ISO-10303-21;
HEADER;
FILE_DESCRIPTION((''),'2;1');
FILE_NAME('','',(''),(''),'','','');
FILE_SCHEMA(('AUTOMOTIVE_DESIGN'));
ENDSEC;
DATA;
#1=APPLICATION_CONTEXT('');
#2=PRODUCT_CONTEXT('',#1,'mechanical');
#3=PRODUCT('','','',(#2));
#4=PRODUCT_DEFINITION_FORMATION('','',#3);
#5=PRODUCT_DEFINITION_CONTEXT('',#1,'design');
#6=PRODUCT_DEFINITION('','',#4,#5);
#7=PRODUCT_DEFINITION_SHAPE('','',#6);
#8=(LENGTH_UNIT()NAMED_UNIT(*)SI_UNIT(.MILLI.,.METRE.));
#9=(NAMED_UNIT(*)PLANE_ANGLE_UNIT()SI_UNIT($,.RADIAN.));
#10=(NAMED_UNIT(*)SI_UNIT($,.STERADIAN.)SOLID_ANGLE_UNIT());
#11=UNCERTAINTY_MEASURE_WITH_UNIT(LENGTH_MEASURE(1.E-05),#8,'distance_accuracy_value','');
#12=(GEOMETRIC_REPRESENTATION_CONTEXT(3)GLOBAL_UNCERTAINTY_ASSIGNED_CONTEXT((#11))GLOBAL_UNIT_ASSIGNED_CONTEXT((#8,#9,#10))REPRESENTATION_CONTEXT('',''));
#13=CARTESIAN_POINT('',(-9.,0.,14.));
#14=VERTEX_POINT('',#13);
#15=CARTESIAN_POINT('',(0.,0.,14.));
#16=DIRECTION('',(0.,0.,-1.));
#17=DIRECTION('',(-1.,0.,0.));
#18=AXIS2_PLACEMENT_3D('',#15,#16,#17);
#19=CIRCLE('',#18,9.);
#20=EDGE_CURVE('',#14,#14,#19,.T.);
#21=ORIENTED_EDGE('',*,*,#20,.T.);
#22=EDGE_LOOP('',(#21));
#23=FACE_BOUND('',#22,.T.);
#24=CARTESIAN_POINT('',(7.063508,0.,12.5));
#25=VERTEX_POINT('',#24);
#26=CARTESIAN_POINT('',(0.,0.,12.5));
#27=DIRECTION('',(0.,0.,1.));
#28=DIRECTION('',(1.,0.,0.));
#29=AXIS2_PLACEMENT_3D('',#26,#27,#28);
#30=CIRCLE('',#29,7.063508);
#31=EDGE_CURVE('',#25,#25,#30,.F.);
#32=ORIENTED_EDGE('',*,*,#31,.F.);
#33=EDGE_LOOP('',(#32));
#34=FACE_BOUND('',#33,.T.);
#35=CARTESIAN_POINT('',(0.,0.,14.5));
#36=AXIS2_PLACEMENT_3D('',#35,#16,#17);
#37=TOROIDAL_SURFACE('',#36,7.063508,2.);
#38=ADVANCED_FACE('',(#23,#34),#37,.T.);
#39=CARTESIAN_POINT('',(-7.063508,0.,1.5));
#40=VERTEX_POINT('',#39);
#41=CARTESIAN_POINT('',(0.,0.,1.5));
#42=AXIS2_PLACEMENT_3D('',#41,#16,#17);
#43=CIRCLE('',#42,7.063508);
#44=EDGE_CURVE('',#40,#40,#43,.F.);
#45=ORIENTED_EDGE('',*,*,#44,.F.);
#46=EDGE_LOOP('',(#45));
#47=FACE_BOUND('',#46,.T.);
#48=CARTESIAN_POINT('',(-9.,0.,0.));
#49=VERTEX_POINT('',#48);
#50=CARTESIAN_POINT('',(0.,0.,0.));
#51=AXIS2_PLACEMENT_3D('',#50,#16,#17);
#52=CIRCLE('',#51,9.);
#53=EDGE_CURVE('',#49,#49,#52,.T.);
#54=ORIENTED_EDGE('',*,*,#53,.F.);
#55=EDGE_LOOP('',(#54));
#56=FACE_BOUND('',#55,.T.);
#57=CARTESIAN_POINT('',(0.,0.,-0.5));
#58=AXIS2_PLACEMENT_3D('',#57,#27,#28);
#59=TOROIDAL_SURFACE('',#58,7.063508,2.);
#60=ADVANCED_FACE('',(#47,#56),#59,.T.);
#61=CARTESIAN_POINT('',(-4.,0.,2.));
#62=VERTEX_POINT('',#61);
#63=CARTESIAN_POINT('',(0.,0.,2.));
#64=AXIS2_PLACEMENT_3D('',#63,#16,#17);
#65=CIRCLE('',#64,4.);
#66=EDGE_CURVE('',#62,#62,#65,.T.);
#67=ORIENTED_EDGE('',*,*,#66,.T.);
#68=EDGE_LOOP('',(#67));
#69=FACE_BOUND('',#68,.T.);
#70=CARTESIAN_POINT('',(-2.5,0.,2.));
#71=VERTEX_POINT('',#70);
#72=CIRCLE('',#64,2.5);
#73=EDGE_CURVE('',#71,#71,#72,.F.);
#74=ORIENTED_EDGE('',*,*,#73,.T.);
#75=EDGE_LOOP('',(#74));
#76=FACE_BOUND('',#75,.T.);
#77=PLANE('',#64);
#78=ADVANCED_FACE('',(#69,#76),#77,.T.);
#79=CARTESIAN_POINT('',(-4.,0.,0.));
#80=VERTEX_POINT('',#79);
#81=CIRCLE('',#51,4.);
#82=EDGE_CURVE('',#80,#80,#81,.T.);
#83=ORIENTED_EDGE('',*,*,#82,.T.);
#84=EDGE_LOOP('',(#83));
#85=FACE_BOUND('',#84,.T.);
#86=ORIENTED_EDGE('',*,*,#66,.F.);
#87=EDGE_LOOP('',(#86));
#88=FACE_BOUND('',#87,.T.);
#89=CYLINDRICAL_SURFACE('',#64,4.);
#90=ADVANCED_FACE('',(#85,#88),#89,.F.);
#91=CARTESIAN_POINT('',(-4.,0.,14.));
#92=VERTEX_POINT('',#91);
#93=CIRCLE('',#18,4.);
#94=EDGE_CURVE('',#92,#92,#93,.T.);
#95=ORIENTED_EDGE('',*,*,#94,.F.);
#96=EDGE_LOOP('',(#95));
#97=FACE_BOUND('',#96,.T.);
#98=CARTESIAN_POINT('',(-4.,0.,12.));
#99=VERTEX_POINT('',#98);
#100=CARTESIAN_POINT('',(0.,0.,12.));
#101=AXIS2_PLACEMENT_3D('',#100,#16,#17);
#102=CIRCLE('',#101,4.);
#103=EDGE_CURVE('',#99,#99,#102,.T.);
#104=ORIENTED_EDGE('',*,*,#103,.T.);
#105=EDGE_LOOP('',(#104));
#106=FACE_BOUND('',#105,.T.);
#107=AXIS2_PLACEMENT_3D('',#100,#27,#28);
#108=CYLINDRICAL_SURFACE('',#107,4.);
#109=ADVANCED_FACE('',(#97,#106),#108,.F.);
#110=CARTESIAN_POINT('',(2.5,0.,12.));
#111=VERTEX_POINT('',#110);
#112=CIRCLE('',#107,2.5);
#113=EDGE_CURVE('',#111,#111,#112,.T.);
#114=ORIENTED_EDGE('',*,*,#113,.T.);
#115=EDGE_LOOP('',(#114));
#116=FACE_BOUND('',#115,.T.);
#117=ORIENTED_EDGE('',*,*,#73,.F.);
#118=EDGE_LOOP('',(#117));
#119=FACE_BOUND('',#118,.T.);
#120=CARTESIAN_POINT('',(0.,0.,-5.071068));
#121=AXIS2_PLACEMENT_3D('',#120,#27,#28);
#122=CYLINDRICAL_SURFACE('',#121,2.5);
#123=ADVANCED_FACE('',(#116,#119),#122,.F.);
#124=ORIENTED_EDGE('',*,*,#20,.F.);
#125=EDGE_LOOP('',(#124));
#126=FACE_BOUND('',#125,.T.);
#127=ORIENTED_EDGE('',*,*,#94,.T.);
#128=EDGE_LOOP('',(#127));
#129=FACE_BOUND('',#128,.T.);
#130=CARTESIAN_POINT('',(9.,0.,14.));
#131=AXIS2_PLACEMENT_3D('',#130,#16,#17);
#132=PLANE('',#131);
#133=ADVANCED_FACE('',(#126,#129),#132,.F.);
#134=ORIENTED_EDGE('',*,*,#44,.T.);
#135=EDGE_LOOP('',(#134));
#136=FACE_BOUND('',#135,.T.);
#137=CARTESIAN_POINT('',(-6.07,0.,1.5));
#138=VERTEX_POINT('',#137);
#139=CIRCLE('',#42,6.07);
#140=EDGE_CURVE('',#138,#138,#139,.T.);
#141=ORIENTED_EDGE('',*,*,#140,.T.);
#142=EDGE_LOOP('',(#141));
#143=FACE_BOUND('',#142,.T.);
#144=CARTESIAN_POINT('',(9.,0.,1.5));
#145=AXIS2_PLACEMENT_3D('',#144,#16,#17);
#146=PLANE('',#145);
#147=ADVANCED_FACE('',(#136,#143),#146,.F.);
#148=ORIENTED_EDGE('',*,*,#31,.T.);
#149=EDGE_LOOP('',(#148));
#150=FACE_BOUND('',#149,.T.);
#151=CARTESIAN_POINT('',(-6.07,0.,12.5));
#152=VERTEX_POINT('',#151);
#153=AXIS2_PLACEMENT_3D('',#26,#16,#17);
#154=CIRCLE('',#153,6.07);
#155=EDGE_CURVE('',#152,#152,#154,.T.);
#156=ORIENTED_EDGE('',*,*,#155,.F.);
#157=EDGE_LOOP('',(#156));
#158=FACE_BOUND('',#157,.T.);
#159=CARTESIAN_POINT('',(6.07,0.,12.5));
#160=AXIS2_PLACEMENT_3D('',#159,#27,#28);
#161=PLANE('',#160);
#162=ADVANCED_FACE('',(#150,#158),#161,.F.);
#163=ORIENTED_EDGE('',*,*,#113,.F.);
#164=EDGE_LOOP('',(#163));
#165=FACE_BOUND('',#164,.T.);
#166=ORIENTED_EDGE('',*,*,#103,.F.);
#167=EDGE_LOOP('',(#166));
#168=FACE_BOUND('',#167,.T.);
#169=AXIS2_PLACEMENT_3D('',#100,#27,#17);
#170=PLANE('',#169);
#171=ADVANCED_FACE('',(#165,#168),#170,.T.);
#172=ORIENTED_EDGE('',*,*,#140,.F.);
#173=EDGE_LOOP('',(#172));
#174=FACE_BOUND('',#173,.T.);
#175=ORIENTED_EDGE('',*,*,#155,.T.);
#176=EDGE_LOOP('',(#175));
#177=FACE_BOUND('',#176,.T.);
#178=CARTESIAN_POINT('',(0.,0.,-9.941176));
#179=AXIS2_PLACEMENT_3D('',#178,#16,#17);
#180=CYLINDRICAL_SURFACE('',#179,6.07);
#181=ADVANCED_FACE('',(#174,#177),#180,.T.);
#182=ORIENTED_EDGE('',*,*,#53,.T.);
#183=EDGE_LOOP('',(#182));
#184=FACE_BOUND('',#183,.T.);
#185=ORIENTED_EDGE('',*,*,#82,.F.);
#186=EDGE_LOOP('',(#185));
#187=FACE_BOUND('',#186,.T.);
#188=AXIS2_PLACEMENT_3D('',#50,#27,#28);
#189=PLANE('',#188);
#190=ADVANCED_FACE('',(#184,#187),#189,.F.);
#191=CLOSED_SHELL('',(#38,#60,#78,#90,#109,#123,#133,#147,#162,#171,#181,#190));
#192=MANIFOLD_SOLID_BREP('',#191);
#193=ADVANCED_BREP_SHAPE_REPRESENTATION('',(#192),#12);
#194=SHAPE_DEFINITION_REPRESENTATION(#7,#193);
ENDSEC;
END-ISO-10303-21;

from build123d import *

# Parameters (mm, degrees)
FILLET1_R          = 2
SKETCH2_R          = 4
CUT_EXTRUDE2_DEPTH = 2
SKETCH4_R          = 2.5
CUT_EXTRUDE3_DEPTH = 10


with BuildPart() as part:
    # Sketch1 → Revolve1 (revolve)
    with BuildSketch(Plane(origin=(0, 0, 0), x_dir=(1, 0, 0), z_dir=(0, 1, 0)), mode=Mode.PRIVATE) as revolve1_sk:
        Polygon((0, 0), (9, 0), (9, -1.5), (6.07, -1.5), (6.07, -12.5), (9, -12.5), (9, -14), (0, -14), align=None)
    revolve(revolve1_sk.sketch.rotate(Axis((0, 0, -9.941176471), (0, 0, 1)), 180), axis=Axis((0, 0, -9.941176471), (0, 0, 1)))

    # Fillet1
    # the kernel refuses this fillet: 2 mm, written as the material it takes off along each edge
    with BuildSketch(Plane(origin=(0, 0, 12.5), x_dir=(-1, 0, 0), z_dir=(0, 1, 0))) as fillet1_piece_1:
        with BuildLine():
            CenterArc((7.063508327, 2), FILLET1_R, 270, 75.522487814)
            Line((9, 1.5), (9.038729833, 1.49))
            ThreePointArc((9.038729833, 1.49), (9.04, 0.75), (9.04, 0))
            Line((9.04, 0), (9, -0.04))
            Line((9, -0.04), (7.063508327, -0.04))
            Line((7.063508327, -0.04), (7.063508327, 0))
        make_face()
    revolve(axis=Axis((0, 0, 12.5), (0, 0, 1)), mode=Mode.SUBTRACT)
    with BuildSketch(Plane(origin=(0, 0, 1.5), x_dir=(-1, 0, 0), z_dir=(0, 1, 0))) as fillet1_piece_2:
        with BuildLine():
            CenterArc((7.063508327, -2), FILLET1_R, 14.477512186, 75.522487814)
            Line((7.063508327, 0), (7.063508327, 0.04))
            Line((7.063508327, 0.04), (9, 0.04))
            Line((9, 0.04), (9.04, 0))
            ThreePointArc((9.04, 0), (9.04, -0.75), (9.038729833, -1.49))
            Line((9.038729833, -1.49), (9, -1.5))
        make_face()
    revolve(axis=Axis((0, 0, 1.5), (0, 0, 1)), mode=Mode.SUBTRACT)

    # Sketch2 → Cut-Extrude2 (cut)
    with BuildSketch(Plane(origin=(0, 0, 0), x_dir=(-1, 0, 0), z_dir=(0, 0, -1))):
        Circle(SKETCH2_R)
    cut_extrude2 = extrude(amount=-CUT_EXTRUDE2_DEPTH, mode=Mode.SUBTRACT)

    # Mirror1: Cut-Extrude2 across plane
    add(cut_extrude2.mirror(Plane(origin=(0, 0, 7), x_dir=(1, 0, 0), z_dir=(0, 0, -1))), mode=Mode.SUBTRACT)

    # Sketch4 → Cut-Extrude3 (cut)
    with BuildSketch(Plane.XY.offset(12)):
        Circle(SKETCH4_R)
    extrude(amount=-CUT_EXTRUDE3_DEPTH, mode=Mode.SUBTRACT)


solid = part.part
